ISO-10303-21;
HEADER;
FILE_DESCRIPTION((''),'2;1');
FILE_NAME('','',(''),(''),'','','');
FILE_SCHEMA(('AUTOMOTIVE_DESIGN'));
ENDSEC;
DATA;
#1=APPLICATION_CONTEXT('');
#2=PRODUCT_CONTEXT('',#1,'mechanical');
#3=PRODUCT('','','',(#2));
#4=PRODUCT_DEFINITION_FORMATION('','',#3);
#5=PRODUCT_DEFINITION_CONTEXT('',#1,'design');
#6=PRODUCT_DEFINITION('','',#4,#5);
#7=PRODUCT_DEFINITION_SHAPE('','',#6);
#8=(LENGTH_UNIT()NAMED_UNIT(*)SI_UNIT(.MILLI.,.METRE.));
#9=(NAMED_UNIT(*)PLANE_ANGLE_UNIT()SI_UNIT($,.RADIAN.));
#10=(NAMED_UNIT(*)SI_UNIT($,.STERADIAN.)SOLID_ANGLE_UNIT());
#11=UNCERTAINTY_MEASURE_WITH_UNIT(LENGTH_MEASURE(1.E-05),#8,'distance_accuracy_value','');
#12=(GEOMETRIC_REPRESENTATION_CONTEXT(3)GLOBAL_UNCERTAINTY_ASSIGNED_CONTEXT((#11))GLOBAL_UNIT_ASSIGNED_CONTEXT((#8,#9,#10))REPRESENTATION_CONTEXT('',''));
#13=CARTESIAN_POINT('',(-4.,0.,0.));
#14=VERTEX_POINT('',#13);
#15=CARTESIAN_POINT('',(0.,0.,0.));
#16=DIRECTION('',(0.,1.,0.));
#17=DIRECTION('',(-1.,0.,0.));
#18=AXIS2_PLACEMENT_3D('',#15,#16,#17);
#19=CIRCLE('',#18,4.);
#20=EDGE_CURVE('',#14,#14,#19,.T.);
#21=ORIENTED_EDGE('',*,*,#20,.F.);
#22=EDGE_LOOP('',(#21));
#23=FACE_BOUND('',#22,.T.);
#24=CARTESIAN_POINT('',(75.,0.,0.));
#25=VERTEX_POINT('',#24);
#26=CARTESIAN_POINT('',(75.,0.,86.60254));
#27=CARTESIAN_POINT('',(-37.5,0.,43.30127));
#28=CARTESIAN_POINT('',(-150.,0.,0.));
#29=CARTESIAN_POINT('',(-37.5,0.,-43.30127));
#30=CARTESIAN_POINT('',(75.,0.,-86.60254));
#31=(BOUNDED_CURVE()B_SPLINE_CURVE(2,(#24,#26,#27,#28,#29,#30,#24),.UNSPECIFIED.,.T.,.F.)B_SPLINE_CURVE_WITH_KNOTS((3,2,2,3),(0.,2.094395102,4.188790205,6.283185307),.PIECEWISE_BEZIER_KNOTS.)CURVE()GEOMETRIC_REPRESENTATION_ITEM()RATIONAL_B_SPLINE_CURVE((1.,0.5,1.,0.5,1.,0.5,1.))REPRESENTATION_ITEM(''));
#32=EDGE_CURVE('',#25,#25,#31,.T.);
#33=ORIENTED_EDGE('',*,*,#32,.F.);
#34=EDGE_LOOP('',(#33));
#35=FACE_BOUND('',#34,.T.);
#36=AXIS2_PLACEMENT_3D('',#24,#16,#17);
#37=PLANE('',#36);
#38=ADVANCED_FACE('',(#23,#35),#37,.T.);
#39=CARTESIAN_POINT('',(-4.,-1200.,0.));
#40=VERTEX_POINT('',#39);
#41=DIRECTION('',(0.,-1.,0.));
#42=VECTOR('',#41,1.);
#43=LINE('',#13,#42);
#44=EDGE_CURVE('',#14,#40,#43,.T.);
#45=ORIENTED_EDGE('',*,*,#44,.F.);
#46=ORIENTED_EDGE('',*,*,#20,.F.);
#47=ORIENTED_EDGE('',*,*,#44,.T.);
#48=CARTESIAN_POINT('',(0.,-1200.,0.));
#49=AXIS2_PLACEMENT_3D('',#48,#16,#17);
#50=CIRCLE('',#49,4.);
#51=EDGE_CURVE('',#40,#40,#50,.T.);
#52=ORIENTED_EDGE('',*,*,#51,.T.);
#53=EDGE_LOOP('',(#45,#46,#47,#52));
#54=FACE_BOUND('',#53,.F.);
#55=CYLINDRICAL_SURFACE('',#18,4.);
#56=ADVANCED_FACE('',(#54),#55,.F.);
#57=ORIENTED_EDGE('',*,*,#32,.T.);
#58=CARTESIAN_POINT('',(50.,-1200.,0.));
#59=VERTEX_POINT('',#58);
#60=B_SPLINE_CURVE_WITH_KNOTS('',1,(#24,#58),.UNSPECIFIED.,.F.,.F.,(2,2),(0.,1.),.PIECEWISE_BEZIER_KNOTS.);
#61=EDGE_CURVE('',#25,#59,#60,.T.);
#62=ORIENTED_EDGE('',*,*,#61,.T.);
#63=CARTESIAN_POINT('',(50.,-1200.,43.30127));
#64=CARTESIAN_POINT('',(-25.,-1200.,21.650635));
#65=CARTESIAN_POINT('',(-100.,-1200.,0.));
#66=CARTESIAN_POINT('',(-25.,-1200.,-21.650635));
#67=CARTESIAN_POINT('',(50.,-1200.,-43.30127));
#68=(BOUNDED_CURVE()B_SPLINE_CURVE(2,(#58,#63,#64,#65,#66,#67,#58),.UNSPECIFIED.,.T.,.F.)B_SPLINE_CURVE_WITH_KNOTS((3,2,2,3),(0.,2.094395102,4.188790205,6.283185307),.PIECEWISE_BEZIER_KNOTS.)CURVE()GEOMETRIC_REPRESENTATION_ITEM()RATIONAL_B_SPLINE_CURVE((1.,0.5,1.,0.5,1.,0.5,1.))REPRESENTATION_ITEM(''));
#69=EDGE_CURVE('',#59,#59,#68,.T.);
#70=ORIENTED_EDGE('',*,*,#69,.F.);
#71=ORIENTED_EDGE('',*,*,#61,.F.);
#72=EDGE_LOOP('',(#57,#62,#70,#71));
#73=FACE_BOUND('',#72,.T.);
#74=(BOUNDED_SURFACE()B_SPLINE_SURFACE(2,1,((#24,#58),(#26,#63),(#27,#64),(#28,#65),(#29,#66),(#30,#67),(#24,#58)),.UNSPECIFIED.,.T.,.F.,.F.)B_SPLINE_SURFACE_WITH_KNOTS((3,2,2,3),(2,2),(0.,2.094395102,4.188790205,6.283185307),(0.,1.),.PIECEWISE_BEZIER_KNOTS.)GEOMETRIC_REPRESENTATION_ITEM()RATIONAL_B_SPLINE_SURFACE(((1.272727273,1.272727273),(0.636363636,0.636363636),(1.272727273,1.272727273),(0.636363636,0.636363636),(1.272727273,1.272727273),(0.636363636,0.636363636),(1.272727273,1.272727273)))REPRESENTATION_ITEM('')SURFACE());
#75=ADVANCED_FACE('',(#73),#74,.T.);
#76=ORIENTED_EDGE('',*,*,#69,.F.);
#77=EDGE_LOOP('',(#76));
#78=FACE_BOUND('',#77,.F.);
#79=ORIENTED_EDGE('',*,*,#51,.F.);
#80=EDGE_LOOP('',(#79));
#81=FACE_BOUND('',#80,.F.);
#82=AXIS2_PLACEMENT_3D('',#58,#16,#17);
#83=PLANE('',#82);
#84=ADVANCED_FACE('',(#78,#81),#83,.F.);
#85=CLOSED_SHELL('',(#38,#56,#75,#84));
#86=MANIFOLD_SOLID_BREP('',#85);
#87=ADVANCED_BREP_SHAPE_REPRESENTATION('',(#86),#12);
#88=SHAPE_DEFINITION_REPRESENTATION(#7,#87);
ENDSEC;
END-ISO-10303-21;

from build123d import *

# Parameters (mm, degrees)
F4_R     = 4
F5_DEPTH = 1200


with BuildPart() as f3:
    # F0 (on Front) → F3 section 0
    with BuildSketch(Plane.XZ):
        with BuildLine():
            add(Edge.make_bspline(
                [(75, 0), (75, 86.6025403784), (-37.5, 43.3012701892), (-150, 0), (-37.5, -43.3012701892), (75, -86.6025403784), (75, 0)],
                knots=[0, 0, 0, 2.0943951024, 2.0943951024, 4.1887902048, 4.1887902048, 6.2831853072, 6.2831853072, 6.2831853072], degree=2, weights=[1, 0.5, 1, 0.5, 1, 0.5, 1]))
        make_face()
    # F2 (on offset) → F3 section 1
    with BuildSketch(Plane.XZ.offset(1200)):
        with BuildLine():
            add(Edge.make_bspline(
                [(50, 0), (50, 43.3012701892), (-25, 21.6506350946), (-100, 0), (-25, -21.6506350946), (50, -43.3012701892), (50, 0)],
                knots=[0, 0, 0, 2.0943951024, 2.0943951024, 4.1887902048, 4.1887902048, 6.2831853072, 6.2831853072, 6.2831853072], degree=2, weights=[1, 0.5, 1, 0.5, 1, 0.5, 1]))
        make_face()
    loft()

    # F4 (on face) → F5 (cut)
    with BuildSketch(Plane(origin=(0, 0, 0), x_dir=(-1, 0, 0), z_dir=(0, 1, 0))):
        Circle(F4_R)
    extrude(amount=-F5_DEPTH, mode=Mode.SUBTRACT)


solid = f3.part
